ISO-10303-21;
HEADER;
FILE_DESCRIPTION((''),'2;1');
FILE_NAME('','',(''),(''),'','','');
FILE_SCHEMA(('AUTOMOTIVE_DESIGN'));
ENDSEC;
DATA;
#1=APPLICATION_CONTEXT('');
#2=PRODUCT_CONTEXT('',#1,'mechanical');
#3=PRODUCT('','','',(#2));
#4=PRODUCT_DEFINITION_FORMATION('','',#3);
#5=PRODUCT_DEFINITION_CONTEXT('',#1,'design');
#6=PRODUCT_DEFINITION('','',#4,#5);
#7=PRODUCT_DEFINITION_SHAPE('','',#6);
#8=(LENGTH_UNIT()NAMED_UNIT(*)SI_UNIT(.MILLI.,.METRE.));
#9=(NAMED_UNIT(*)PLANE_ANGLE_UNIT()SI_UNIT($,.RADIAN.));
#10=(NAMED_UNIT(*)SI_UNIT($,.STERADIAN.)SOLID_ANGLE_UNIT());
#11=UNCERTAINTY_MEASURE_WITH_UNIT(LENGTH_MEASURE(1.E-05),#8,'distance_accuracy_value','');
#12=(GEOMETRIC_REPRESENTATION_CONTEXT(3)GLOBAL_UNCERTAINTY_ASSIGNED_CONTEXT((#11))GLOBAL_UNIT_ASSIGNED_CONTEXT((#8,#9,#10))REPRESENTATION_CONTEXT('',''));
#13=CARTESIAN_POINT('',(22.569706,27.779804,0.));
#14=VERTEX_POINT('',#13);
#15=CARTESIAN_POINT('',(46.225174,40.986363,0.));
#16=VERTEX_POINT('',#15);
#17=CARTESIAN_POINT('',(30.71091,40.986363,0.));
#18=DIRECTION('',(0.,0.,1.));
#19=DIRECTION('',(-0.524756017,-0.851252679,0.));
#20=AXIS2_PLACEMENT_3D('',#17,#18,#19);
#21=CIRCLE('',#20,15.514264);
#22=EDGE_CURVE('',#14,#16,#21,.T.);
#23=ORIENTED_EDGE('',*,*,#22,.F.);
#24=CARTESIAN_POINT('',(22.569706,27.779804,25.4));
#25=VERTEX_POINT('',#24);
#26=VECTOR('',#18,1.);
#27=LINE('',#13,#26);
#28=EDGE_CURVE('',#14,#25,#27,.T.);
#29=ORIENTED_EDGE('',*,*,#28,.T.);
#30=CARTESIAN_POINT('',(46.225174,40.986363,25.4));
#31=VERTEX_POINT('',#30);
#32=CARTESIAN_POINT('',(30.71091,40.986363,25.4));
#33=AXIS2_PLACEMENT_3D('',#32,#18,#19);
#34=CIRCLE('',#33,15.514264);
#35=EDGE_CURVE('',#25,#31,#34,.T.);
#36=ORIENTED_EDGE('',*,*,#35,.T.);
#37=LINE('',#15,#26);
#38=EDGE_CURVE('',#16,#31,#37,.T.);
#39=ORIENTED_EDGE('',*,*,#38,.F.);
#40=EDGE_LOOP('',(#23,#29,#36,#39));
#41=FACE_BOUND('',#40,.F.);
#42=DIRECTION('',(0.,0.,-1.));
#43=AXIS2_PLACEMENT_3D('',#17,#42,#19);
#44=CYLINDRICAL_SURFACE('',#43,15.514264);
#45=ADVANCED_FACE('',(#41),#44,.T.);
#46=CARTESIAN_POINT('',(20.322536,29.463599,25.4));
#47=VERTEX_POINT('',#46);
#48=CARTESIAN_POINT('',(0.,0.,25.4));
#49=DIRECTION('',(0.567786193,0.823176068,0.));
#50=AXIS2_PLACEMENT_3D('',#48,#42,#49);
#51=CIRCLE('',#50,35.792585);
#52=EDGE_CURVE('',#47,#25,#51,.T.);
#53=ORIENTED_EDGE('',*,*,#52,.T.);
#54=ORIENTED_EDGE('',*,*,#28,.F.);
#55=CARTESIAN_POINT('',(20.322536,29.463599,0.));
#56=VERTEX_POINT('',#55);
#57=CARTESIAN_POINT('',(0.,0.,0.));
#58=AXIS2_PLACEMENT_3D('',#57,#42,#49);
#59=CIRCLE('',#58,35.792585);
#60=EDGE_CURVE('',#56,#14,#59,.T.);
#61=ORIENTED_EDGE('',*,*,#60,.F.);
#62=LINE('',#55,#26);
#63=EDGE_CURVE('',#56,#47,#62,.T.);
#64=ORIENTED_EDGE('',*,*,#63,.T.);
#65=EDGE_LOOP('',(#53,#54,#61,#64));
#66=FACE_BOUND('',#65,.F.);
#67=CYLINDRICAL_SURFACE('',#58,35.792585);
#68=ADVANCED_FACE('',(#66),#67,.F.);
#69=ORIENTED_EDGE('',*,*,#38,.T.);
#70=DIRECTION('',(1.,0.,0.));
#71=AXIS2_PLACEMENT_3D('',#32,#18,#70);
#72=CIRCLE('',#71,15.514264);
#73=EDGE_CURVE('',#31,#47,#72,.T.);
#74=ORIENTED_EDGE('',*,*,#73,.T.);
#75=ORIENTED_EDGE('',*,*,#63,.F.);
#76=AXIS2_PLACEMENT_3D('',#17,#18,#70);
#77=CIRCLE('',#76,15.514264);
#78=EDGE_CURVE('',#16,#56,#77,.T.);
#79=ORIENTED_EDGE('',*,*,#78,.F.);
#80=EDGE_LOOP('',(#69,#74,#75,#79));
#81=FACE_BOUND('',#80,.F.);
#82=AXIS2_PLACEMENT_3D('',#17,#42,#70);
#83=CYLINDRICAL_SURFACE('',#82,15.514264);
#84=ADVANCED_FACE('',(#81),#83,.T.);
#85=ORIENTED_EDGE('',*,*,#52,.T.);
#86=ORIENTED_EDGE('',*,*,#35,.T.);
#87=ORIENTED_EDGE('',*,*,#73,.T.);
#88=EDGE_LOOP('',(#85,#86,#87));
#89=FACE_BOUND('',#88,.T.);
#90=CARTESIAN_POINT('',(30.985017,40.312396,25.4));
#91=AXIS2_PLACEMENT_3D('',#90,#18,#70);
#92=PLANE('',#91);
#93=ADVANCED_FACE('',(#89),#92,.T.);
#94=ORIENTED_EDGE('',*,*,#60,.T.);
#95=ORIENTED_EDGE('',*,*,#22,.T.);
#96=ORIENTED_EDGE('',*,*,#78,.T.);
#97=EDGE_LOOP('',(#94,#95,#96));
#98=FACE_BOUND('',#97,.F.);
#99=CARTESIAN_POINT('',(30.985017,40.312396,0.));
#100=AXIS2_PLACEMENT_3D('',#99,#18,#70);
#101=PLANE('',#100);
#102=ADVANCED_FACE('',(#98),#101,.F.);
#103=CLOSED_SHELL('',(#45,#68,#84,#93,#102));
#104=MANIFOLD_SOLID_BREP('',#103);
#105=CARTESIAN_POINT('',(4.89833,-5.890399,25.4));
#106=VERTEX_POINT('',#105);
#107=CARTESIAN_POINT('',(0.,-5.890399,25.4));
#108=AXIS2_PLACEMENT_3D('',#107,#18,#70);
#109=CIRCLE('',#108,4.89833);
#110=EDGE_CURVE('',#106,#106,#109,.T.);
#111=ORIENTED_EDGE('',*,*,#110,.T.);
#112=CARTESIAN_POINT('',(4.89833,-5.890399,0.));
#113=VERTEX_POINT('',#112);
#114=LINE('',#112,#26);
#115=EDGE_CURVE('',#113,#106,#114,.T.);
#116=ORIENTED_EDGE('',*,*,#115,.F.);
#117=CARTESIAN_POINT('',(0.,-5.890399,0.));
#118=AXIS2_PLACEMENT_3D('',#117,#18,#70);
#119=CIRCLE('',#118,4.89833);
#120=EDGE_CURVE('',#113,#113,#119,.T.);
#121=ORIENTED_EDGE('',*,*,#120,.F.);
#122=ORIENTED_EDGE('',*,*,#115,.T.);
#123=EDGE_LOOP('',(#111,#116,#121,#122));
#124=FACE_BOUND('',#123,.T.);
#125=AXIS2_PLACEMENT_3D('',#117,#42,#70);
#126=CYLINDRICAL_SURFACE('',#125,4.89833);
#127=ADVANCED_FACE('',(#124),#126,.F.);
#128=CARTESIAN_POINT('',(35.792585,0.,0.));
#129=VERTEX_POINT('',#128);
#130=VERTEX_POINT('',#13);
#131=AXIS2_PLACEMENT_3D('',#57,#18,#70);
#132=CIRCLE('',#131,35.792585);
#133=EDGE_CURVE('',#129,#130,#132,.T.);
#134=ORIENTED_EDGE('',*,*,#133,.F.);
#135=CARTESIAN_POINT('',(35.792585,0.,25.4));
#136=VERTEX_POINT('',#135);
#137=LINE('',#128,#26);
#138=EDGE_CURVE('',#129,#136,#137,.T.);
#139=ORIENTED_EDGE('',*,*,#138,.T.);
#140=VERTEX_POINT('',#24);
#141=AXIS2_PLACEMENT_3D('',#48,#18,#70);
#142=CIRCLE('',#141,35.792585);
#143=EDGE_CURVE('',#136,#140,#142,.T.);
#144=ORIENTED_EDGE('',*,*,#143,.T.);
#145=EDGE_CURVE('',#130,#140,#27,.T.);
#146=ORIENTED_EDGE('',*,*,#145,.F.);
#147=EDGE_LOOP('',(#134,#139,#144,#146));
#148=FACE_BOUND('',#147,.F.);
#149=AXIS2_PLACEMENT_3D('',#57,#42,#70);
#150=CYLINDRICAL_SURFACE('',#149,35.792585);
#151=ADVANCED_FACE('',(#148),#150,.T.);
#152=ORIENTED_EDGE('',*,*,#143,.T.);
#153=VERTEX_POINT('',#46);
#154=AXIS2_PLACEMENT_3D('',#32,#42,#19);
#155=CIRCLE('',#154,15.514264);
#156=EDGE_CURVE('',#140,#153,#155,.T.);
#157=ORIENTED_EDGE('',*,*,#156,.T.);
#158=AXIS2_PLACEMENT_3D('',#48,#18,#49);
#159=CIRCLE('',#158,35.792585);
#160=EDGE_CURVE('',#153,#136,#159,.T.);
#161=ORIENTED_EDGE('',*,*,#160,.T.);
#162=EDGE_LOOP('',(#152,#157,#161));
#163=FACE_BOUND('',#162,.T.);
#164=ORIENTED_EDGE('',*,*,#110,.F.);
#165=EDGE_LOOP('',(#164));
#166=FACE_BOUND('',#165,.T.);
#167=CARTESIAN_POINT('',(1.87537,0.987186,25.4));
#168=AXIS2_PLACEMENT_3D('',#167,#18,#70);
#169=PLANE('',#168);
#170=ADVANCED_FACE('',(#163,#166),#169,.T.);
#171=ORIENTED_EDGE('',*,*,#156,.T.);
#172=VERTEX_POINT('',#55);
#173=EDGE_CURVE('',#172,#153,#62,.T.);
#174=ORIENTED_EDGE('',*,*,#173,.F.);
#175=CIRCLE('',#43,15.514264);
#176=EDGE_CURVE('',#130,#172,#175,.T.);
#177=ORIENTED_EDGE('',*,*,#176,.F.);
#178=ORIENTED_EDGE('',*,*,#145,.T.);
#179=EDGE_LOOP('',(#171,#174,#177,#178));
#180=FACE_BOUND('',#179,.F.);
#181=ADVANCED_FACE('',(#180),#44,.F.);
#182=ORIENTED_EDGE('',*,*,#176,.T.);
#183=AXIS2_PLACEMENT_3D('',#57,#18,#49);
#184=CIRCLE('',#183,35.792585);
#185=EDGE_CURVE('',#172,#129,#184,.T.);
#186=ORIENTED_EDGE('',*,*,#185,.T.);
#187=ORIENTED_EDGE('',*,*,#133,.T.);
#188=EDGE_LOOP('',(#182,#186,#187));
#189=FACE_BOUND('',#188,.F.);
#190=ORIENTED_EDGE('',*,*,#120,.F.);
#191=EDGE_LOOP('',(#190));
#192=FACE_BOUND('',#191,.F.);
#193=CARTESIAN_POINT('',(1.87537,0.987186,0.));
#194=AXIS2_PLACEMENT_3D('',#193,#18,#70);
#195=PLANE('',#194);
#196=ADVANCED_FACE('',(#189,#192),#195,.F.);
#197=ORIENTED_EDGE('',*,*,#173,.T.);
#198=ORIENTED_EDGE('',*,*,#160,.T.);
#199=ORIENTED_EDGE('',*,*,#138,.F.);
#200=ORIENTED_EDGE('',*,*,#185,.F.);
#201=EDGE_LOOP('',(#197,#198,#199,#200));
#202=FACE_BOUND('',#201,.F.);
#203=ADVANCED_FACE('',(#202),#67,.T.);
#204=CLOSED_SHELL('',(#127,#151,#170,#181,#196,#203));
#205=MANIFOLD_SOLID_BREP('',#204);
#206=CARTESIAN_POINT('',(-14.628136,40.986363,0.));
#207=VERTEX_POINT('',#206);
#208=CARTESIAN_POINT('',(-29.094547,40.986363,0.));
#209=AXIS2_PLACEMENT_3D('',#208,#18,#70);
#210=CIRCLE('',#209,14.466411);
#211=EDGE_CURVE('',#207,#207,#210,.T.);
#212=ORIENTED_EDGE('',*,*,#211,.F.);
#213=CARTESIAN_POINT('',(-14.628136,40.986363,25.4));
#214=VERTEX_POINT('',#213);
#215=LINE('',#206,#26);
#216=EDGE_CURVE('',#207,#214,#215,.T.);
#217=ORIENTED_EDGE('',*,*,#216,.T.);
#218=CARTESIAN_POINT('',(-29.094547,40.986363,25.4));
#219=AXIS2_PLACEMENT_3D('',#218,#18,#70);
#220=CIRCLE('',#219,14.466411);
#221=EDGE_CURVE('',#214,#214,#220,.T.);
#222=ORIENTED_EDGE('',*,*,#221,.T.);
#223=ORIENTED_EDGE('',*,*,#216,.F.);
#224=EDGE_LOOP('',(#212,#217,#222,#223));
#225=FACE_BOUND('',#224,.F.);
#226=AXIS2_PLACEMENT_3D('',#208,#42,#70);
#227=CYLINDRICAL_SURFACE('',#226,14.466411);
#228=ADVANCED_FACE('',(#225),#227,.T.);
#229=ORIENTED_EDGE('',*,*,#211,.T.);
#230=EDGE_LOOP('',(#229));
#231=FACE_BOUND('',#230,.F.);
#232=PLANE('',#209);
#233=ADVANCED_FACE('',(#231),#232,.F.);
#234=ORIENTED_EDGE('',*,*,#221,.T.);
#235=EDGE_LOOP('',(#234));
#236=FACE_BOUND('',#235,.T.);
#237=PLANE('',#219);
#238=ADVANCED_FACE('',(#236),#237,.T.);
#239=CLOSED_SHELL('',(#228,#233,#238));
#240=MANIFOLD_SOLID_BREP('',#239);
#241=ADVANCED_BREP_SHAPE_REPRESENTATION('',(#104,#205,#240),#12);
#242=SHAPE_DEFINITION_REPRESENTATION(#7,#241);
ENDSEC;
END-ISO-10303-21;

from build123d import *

# Parameters (mm, degrees)
F0_R     = 4.8983295198
F1_DEPTH = 25.4
F0_R_2   = 14.4664110347


# Not quite as in the source:
# - the program builds the solid bodies; features that only make, move or delete a surface that nothing else refers to are left out


with BuildPart() as f1:
    # F0 (on Top) → F1 (new body)
    with BuildSketch(Plane.XY):
        with BuildLine():
            ThreePointArc((20.3225355866, 29.4635993727), (-31.6899449587, -16.6390062557), (35.7925849956, 0))
            ThreePointArc((35.7925849956, 0), (32.3182399262, 15.3831241541), (22.5697060798, 27.7798039614))
            ThreePointArc((22.5697060798, 27.7798039614), (21.4079475638, 28.5707561401), (20.3225355866, 29.4635993727))
        make_face()
        with Locations((0, -5.8903987519)):
            Circle(F0_R, mode=Mode.SUBTRACT)
    extrude(amount=F1_DEPTH)


with BuildPart() as f1b:
    # F0 (on Top) → F1, piece 2 (new body)
    with BuildSketch(Plane.XY):
        with Locations((-29.0945470333, 40.9863628447)):
            Circle(F0_R_2)
    extrude(amount=F1_DEPTH)


with BuildPart() as f1c:
    # F0 (on Top) → F1, piece 3 (new body)
    with BuildSketch(Plane.XY):
        with BuildLine():
            ThreePointArc((20.3225355866, 29.4635993727), (21.4626394122, 28.6437471383), (22.5697060798, 27.7798039614))
            ThreePointArc((22.5697060798, 27.7798039614), (38.2735681299, 27.440197867), (46.2251736271, 40.9863628447))
            ThreePointArc((46.2251736271, 40.9863628447), (24.4051814016, 55.1613472846), (20.3225355866, 29.4635993727))
        make_face()
    extrude(amount=F1_DEPTH)


solid = Compound([f1.part, f1b.part, f1c.part])
